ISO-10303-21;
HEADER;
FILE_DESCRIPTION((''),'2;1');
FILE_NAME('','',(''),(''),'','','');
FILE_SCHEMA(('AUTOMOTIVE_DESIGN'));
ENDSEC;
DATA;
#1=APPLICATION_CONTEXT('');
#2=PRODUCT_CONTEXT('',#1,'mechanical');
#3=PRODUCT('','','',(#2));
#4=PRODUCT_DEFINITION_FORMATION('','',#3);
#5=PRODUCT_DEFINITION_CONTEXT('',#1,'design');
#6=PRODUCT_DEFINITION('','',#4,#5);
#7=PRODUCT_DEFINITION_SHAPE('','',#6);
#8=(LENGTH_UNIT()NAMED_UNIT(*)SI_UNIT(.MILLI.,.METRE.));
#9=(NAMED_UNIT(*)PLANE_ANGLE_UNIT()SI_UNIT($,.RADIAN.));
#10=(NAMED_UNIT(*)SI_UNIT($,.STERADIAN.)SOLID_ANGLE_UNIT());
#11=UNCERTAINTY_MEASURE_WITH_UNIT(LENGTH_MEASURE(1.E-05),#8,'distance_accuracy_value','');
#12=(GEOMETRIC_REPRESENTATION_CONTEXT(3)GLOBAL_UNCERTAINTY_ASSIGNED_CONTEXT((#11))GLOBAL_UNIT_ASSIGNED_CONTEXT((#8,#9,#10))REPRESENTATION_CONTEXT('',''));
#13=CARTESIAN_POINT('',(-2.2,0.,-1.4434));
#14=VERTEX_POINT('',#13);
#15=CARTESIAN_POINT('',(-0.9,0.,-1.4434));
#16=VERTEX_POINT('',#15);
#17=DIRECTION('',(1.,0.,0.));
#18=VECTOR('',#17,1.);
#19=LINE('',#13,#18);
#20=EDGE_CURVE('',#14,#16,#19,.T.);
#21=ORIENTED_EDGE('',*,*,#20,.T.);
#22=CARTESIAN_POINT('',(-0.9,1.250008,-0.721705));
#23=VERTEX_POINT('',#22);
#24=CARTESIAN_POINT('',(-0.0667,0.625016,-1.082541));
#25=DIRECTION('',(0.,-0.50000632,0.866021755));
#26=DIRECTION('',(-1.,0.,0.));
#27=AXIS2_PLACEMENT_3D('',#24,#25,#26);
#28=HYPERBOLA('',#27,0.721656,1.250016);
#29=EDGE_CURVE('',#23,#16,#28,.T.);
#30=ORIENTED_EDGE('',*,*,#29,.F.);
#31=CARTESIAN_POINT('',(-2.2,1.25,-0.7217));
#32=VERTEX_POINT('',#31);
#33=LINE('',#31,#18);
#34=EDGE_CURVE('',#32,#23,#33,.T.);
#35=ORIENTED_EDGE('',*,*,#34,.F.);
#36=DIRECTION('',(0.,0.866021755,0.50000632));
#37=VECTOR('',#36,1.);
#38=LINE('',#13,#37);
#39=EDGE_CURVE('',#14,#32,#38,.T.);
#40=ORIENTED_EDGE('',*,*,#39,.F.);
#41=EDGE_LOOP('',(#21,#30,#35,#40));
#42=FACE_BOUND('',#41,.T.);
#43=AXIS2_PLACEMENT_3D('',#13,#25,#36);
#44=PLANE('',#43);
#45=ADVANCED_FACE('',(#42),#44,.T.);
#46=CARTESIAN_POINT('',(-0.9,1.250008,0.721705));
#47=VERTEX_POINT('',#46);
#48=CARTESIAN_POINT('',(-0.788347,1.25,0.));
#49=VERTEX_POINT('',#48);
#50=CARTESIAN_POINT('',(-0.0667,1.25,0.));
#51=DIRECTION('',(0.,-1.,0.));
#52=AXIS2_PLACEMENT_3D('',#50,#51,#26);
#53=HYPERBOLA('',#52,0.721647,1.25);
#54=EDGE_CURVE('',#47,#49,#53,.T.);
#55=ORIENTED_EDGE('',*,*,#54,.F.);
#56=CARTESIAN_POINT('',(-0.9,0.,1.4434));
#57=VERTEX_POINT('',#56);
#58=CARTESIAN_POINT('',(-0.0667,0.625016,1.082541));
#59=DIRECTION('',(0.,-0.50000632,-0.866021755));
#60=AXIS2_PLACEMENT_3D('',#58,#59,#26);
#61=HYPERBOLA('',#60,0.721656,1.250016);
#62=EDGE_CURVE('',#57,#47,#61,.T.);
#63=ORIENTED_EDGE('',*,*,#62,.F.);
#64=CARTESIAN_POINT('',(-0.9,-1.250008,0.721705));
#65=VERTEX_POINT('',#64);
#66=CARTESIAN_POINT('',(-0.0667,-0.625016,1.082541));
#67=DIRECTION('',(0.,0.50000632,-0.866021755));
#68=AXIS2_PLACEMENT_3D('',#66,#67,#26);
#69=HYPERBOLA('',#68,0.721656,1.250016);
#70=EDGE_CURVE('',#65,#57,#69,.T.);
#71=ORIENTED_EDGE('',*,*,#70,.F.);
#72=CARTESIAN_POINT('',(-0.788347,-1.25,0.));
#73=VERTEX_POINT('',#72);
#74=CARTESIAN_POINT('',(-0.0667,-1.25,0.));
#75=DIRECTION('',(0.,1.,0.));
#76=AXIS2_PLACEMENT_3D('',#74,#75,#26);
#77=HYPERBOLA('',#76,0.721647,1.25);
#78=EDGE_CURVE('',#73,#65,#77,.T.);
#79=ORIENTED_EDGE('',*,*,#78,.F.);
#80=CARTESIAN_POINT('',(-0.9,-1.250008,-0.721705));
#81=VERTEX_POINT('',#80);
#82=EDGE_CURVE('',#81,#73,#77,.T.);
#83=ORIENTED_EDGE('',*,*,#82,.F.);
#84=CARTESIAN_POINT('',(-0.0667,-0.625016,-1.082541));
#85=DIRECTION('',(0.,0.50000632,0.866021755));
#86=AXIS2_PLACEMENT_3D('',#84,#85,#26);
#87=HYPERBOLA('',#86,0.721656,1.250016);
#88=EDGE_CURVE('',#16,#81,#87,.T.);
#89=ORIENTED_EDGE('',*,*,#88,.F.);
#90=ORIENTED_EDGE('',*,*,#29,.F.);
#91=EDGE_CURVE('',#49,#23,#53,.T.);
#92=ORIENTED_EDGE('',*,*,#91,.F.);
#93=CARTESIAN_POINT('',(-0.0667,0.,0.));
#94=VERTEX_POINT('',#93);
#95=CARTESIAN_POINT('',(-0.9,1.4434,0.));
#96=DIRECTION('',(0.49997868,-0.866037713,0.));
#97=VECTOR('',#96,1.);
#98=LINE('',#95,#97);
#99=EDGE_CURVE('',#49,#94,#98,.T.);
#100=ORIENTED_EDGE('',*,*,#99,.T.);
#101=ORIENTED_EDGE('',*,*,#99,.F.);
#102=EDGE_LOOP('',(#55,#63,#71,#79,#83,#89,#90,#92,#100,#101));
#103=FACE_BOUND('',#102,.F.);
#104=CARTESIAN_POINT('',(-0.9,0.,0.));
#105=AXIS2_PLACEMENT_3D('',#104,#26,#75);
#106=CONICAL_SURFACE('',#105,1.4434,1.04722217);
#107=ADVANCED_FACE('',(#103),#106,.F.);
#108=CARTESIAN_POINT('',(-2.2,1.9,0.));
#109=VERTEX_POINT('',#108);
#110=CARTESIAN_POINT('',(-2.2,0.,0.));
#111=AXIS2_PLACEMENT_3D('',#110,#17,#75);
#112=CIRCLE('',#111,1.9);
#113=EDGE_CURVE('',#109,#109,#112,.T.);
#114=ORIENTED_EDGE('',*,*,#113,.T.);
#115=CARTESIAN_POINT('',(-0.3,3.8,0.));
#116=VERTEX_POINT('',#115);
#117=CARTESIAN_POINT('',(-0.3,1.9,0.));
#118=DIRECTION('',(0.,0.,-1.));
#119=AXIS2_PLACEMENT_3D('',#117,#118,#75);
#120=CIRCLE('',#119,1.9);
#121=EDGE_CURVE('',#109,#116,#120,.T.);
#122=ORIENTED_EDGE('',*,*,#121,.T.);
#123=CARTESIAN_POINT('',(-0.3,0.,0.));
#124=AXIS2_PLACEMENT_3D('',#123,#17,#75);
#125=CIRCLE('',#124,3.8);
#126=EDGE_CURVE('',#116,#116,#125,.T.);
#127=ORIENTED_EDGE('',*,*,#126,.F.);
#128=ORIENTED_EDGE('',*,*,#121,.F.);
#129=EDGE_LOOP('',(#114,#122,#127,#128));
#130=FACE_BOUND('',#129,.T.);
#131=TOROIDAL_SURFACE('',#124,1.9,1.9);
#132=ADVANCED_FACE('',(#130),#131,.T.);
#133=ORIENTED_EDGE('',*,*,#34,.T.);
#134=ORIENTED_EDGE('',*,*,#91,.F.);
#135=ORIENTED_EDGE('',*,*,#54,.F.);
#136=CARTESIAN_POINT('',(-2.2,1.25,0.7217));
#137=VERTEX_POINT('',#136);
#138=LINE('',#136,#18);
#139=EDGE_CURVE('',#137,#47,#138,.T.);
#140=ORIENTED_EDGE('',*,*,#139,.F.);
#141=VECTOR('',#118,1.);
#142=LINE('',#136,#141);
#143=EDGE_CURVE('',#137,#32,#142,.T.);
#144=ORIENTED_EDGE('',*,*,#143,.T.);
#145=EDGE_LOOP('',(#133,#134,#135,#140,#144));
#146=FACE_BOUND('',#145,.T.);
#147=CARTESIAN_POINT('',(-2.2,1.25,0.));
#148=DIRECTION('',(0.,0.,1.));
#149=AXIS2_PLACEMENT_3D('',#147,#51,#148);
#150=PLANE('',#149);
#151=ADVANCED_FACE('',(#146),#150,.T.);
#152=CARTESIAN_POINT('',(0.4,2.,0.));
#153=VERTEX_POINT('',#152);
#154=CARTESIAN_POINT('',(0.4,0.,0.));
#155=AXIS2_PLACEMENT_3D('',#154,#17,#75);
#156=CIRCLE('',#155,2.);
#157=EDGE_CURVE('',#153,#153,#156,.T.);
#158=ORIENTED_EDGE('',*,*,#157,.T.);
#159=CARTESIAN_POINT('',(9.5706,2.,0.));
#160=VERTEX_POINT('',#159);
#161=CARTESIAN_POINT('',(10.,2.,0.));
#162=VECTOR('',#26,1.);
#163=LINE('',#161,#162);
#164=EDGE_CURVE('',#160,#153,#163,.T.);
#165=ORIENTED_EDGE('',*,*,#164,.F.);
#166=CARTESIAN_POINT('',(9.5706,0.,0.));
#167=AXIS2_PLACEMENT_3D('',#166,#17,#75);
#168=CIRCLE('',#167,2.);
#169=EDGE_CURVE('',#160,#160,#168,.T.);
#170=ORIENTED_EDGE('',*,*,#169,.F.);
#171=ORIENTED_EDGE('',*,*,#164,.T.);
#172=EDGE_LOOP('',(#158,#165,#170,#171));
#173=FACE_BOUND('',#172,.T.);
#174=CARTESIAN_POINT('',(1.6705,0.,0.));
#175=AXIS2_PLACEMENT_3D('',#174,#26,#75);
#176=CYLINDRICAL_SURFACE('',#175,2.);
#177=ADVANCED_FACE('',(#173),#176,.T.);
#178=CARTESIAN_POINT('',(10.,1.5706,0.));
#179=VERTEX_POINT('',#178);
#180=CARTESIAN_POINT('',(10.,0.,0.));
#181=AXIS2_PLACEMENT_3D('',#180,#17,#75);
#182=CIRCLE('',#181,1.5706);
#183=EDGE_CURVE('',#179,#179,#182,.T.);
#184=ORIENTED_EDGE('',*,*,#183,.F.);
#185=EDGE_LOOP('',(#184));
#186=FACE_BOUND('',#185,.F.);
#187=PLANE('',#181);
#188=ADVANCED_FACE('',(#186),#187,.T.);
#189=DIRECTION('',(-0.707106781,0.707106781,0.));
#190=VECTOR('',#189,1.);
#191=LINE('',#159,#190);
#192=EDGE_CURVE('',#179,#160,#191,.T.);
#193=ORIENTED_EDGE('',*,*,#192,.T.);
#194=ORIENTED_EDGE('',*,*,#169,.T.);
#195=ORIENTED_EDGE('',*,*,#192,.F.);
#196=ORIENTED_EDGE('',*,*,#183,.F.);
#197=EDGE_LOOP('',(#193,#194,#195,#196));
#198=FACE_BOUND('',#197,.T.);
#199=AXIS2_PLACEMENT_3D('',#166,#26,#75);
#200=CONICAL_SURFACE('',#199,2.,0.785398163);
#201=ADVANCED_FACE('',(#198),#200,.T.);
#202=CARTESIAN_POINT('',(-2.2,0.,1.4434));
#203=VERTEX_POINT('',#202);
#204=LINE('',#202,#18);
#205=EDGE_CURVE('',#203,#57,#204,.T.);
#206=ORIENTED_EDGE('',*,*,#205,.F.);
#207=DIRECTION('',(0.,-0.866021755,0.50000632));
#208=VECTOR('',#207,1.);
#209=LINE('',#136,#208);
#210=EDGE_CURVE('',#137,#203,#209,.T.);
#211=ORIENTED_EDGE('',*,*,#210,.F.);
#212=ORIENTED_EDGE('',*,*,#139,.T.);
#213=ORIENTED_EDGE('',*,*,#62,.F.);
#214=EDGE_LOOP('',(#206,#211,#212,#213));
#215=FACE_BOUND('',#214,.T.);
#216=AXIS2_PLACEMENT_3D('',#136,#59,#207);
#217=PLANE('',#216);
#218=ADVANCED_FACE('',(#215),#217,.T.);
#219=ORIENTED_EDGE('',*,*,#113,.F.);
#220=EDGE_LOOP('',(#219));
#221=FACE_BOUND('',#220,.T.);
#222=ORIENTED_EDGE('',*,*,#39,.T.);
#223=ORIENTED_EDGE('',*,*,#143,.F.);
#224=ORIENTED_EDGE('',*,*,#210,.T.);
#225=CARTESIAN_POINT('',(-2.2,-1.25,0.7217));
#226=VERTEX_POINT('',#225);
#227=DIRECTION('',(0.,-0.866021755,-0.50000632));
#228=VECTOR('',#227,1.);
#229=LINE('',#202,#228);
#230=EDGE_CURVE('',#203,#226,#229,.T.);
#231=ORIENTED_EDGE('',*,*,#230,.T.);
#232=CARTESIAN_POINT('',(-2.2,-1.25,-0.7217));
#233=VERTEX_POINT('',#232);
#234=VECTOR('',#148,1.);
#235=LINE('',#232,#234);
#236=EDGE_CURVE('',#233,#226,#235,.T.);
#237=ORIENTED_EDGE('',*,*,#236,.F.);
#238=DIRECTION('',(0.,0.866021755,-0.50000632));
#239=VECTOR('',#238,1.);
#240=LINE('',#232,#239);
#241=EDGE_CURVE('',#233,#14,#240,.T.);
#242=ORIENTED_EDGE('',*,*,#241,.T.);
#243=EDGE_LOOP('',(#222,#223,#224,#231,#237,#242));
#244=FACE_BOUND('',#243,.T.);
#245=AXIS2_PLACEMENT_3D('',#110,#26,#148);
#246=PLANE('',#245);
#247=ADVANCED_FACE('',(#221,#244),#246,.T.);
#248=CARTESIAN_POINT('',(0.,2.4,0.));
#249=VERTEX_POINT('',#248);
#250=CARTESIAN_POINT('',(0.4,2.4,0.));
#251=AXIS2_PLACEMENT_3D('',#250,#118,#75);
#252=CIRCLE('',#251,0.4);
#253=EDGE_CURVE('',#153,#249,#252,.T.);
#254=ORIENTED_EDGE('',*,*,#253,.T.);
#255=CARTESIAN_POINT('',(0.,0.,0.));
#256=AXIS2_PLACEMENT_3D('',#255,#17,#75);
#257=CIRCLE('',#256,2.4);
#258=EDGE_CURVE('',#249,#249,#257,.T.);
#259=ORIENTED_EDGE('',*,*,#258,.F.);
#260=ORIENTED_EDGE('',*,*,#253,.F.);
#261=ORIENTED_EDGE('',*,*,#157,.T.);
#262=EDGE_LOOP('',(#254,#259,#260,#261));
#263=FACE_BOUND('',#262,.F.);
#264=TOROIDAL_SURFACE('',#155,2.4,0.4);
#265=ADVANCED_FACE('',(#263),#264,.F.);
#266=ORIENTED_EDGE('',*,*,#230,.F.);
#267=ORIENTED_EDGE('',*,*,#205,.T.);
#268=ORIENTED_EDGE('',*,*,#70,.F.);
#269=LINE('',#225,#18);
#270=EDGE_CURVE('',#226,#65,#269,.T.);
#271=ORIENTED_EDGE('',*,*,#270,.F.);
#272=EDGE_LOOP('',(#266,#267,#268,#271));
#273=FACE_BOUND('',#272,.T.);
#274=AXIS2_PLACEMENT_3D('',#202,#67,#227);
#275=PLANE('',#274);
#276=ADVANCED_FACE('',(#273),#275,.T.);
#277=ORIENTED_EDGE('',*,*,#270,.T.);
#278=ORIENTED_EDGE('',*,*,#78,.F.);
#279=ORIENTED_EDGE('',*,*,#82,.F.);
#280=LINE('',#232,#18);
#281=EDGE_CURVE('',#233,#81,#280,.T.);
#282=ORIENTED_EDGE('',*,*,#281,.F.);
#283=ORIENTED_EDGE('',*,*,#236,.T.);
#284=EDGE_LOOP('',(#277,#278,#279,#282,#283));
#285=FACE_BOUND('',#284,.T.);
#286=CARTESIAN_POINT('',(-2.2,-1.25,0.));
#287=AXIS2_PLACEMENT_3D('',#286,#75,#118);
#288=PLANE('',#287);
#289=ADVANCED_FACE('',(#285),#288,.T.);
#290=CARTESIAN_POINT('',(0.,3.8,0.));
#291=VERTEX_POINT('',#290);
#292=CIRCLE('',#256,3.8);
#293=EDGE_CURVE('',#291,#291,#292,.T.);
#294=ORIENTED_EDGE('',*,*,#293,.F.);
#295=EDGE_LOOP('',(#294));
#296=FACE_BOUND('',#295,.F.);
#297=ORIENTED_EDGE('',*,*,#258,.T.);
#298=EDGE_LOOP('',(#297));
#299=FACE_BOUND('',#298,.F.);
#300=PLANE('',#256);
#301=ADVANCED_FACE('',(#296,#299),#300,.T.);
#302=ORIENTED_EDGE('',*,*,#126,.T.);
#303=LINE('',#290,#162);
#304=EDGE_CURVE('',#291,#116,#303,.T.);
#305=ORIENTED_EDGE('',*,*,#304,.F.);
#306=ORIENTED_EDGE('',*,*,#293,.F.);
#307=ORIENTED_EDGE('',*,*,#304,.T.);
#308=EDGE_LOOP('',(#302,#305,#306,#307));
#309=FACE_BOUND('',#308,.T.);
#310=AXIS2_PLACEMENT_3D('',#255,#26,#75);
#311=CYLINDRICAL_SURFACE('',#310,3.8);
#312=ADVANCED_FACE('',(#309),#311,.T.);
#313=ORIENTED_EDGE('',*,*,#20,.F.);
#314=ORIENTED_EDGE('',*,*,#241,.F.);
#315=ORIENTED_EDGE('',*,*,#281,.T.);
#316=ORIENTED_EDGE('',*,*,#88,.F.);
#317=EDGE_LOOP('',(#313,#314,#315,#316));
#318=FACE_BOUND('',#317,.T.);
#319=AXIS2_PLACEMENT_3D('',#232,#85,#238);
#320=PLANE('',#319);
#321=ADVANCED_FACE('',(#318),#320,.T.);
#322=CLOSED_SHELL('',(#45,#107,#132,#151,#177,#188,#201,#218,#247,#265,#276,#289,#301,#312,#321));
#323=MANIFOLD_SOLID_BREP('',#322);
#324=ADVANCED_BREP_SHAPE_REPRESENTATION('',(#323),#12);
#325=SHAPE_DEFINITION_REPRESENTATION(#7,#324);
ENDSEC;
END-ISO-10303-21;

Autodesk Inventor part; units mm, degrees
ref_plane "YZ Plane" through (0, 0, 0) normal (1, 0, 0) x (0, 1, 0)
ref_plane "XZ Plane" through (0, 0, 0) normal (0, 1, 0) x (-1, 0, 0)
sketch "Эскиз1" plane through (0, 0, 0) normal (0, 0, 1) x (1, 0, 0)
  line L0 (-0.0667, 0) -> (10, 0)
  line L1 (10, 0) -> (10, 2)
  line L2 (10, 2) -> (2.1, 2)
  line L3 (2.1, 2) -> (1.6705, 2)
  line L4 (1.6705, 2) -> (0, 2)
  line L5 (0, 2) -> (0, 3.8)
  line L6 (0, 3.8) -> (-2.2, 3.8)
  line L7 (-2.2, 3.8) -> (-2.2, 1.4434)
  line L8 (-2.2, 1.4434) -> (-0.9, 1.4434)
  line L9 (-0.9, 1.4434) -> (-0.0667, 0)
  line L10 (-4.64, 0) -> (12.44, 0) projected
  line L11 (0, -0.76) -> (0, 4.56) projected
  line L12 (2.1, 2) -> (0, 2) construction
  dimension "d1" = 7.9
  dimension "d2" = 0.4295
  dimension "d3" = 2.2
  dimension "d4" = 1.3
  dimension "d5" = 60
  dimension "d6" = 4
  dimension "d7" = 4
  dimension "d8" = 2.8868
  dimension "d9" = 7.6
  dimension "d26" = 10
revolve "Базовый элемент" add sketch "Эскиз1" angle 360 about axis through (-0.0667, 0, 0) along (1, 0, 0)
sketch "Эскиз2" plane through (-2.2, 0, 0) normal (-1, 0, 0) x (0, 0, 1)
  circle A0 centre (0, 0) radius 1.4434 projected
  line L0 (0, -5.32) -> (0, 5.32) projected
  line L1 (-5.32, 0) -> (5.32, 0) projected
  line L2 (1.4434, 0) -> (0.7217, -1.25)
  line L3 (0.7217, -1.25) -> (-0.7217, -1.25)
  line L4 (-0.7217, -1.25) -> (-1.4434, 0)
  line L5 (-1.4434, 0) -> (-0.7217, 1.25)
  line L6 (-0.7217, 1.25) -> (0.7217, 1.25)
  line L7 (0.7217, 1.25) -> (1.4434, 0)
extrude "Паз" add sketch "Эскиз2" against normal up to next contours L7 A0 | A0 L2 | L6 L0 A0 | A0 L0 L3 | L0 L6 A0 | A0 L3 L0 | L4 A0 | A0 L5
fillet "Сопряжение1" radius 1.9 1 edges at (-2.2, -3.8, 0)
thread "Резьба" size "M4x0.7" class "6g" standard "ISO Metric profile" length 7.9
chamfer "Фаска1" distance 0.4294 distance2 0.4294 1 edges at (10, -2, 0) measured on face at (10, 0.556, 0.0273)
ref_plane "Work Plane1" through (29, 0, 0) normal (0, -1, 0) x (1, 0, 0)
fillet "Сопряжение2" radius 0.4 1 edges at (0, -2, 0)
equation "\"d17\" = RR"
equation "\"d13\" = GEL"
equation "\"d15\" = -0.5 * SPD + 0.5 * GD"
equation "\"d16\" = GUL"
equation "\"d30\" = R"
equation "\"d1\" = GEL"
equation "\"d3\" = KOH"
equation "\"d4\" = INTI"
equation "\"d6\" = GD"
equation "\"d7\" = BDM"
equation "\"d8\" = 1.1547 * SW"
equation "\"d9\" = KOD"
equation "\"d26\" = NLG"
equation "\"GD\" = NND"
equation "\"NLG\" = 10"
equation "\"GEL\" = 7.9"
equation "\"KOD\" = 7.6"
equation "\"KOH\" = 2.2"
equation "\"INTI\" = 1.3"
equation "\"GAL\" = 0.61345 * PTC"
equation "\"GUL\" = 0.61345 * PTC"
equation "\"BDM\" = NND"
equation "\"SW\" = 2.5"
equation "\"RR\" = 1.9"
equation "\"SPD\" = NND - 1.2269 * PTC"
equation "\"R\" = 0.4"
equation "\"TOA\" = 30deg"
equation "\"GD1\" = THREADDIA - 1.2269 * PTC"
equation "\"THREADDIA\" = 4"
equation "\"PTC\" = 0.7"
equation "\"NND\" = 4"
equation "\"KOH1\" = 0.3"
equation "\"E0\" = 2.873"
properties part number "ISO 7380-1 - M4 x 10" material "Сталь"
